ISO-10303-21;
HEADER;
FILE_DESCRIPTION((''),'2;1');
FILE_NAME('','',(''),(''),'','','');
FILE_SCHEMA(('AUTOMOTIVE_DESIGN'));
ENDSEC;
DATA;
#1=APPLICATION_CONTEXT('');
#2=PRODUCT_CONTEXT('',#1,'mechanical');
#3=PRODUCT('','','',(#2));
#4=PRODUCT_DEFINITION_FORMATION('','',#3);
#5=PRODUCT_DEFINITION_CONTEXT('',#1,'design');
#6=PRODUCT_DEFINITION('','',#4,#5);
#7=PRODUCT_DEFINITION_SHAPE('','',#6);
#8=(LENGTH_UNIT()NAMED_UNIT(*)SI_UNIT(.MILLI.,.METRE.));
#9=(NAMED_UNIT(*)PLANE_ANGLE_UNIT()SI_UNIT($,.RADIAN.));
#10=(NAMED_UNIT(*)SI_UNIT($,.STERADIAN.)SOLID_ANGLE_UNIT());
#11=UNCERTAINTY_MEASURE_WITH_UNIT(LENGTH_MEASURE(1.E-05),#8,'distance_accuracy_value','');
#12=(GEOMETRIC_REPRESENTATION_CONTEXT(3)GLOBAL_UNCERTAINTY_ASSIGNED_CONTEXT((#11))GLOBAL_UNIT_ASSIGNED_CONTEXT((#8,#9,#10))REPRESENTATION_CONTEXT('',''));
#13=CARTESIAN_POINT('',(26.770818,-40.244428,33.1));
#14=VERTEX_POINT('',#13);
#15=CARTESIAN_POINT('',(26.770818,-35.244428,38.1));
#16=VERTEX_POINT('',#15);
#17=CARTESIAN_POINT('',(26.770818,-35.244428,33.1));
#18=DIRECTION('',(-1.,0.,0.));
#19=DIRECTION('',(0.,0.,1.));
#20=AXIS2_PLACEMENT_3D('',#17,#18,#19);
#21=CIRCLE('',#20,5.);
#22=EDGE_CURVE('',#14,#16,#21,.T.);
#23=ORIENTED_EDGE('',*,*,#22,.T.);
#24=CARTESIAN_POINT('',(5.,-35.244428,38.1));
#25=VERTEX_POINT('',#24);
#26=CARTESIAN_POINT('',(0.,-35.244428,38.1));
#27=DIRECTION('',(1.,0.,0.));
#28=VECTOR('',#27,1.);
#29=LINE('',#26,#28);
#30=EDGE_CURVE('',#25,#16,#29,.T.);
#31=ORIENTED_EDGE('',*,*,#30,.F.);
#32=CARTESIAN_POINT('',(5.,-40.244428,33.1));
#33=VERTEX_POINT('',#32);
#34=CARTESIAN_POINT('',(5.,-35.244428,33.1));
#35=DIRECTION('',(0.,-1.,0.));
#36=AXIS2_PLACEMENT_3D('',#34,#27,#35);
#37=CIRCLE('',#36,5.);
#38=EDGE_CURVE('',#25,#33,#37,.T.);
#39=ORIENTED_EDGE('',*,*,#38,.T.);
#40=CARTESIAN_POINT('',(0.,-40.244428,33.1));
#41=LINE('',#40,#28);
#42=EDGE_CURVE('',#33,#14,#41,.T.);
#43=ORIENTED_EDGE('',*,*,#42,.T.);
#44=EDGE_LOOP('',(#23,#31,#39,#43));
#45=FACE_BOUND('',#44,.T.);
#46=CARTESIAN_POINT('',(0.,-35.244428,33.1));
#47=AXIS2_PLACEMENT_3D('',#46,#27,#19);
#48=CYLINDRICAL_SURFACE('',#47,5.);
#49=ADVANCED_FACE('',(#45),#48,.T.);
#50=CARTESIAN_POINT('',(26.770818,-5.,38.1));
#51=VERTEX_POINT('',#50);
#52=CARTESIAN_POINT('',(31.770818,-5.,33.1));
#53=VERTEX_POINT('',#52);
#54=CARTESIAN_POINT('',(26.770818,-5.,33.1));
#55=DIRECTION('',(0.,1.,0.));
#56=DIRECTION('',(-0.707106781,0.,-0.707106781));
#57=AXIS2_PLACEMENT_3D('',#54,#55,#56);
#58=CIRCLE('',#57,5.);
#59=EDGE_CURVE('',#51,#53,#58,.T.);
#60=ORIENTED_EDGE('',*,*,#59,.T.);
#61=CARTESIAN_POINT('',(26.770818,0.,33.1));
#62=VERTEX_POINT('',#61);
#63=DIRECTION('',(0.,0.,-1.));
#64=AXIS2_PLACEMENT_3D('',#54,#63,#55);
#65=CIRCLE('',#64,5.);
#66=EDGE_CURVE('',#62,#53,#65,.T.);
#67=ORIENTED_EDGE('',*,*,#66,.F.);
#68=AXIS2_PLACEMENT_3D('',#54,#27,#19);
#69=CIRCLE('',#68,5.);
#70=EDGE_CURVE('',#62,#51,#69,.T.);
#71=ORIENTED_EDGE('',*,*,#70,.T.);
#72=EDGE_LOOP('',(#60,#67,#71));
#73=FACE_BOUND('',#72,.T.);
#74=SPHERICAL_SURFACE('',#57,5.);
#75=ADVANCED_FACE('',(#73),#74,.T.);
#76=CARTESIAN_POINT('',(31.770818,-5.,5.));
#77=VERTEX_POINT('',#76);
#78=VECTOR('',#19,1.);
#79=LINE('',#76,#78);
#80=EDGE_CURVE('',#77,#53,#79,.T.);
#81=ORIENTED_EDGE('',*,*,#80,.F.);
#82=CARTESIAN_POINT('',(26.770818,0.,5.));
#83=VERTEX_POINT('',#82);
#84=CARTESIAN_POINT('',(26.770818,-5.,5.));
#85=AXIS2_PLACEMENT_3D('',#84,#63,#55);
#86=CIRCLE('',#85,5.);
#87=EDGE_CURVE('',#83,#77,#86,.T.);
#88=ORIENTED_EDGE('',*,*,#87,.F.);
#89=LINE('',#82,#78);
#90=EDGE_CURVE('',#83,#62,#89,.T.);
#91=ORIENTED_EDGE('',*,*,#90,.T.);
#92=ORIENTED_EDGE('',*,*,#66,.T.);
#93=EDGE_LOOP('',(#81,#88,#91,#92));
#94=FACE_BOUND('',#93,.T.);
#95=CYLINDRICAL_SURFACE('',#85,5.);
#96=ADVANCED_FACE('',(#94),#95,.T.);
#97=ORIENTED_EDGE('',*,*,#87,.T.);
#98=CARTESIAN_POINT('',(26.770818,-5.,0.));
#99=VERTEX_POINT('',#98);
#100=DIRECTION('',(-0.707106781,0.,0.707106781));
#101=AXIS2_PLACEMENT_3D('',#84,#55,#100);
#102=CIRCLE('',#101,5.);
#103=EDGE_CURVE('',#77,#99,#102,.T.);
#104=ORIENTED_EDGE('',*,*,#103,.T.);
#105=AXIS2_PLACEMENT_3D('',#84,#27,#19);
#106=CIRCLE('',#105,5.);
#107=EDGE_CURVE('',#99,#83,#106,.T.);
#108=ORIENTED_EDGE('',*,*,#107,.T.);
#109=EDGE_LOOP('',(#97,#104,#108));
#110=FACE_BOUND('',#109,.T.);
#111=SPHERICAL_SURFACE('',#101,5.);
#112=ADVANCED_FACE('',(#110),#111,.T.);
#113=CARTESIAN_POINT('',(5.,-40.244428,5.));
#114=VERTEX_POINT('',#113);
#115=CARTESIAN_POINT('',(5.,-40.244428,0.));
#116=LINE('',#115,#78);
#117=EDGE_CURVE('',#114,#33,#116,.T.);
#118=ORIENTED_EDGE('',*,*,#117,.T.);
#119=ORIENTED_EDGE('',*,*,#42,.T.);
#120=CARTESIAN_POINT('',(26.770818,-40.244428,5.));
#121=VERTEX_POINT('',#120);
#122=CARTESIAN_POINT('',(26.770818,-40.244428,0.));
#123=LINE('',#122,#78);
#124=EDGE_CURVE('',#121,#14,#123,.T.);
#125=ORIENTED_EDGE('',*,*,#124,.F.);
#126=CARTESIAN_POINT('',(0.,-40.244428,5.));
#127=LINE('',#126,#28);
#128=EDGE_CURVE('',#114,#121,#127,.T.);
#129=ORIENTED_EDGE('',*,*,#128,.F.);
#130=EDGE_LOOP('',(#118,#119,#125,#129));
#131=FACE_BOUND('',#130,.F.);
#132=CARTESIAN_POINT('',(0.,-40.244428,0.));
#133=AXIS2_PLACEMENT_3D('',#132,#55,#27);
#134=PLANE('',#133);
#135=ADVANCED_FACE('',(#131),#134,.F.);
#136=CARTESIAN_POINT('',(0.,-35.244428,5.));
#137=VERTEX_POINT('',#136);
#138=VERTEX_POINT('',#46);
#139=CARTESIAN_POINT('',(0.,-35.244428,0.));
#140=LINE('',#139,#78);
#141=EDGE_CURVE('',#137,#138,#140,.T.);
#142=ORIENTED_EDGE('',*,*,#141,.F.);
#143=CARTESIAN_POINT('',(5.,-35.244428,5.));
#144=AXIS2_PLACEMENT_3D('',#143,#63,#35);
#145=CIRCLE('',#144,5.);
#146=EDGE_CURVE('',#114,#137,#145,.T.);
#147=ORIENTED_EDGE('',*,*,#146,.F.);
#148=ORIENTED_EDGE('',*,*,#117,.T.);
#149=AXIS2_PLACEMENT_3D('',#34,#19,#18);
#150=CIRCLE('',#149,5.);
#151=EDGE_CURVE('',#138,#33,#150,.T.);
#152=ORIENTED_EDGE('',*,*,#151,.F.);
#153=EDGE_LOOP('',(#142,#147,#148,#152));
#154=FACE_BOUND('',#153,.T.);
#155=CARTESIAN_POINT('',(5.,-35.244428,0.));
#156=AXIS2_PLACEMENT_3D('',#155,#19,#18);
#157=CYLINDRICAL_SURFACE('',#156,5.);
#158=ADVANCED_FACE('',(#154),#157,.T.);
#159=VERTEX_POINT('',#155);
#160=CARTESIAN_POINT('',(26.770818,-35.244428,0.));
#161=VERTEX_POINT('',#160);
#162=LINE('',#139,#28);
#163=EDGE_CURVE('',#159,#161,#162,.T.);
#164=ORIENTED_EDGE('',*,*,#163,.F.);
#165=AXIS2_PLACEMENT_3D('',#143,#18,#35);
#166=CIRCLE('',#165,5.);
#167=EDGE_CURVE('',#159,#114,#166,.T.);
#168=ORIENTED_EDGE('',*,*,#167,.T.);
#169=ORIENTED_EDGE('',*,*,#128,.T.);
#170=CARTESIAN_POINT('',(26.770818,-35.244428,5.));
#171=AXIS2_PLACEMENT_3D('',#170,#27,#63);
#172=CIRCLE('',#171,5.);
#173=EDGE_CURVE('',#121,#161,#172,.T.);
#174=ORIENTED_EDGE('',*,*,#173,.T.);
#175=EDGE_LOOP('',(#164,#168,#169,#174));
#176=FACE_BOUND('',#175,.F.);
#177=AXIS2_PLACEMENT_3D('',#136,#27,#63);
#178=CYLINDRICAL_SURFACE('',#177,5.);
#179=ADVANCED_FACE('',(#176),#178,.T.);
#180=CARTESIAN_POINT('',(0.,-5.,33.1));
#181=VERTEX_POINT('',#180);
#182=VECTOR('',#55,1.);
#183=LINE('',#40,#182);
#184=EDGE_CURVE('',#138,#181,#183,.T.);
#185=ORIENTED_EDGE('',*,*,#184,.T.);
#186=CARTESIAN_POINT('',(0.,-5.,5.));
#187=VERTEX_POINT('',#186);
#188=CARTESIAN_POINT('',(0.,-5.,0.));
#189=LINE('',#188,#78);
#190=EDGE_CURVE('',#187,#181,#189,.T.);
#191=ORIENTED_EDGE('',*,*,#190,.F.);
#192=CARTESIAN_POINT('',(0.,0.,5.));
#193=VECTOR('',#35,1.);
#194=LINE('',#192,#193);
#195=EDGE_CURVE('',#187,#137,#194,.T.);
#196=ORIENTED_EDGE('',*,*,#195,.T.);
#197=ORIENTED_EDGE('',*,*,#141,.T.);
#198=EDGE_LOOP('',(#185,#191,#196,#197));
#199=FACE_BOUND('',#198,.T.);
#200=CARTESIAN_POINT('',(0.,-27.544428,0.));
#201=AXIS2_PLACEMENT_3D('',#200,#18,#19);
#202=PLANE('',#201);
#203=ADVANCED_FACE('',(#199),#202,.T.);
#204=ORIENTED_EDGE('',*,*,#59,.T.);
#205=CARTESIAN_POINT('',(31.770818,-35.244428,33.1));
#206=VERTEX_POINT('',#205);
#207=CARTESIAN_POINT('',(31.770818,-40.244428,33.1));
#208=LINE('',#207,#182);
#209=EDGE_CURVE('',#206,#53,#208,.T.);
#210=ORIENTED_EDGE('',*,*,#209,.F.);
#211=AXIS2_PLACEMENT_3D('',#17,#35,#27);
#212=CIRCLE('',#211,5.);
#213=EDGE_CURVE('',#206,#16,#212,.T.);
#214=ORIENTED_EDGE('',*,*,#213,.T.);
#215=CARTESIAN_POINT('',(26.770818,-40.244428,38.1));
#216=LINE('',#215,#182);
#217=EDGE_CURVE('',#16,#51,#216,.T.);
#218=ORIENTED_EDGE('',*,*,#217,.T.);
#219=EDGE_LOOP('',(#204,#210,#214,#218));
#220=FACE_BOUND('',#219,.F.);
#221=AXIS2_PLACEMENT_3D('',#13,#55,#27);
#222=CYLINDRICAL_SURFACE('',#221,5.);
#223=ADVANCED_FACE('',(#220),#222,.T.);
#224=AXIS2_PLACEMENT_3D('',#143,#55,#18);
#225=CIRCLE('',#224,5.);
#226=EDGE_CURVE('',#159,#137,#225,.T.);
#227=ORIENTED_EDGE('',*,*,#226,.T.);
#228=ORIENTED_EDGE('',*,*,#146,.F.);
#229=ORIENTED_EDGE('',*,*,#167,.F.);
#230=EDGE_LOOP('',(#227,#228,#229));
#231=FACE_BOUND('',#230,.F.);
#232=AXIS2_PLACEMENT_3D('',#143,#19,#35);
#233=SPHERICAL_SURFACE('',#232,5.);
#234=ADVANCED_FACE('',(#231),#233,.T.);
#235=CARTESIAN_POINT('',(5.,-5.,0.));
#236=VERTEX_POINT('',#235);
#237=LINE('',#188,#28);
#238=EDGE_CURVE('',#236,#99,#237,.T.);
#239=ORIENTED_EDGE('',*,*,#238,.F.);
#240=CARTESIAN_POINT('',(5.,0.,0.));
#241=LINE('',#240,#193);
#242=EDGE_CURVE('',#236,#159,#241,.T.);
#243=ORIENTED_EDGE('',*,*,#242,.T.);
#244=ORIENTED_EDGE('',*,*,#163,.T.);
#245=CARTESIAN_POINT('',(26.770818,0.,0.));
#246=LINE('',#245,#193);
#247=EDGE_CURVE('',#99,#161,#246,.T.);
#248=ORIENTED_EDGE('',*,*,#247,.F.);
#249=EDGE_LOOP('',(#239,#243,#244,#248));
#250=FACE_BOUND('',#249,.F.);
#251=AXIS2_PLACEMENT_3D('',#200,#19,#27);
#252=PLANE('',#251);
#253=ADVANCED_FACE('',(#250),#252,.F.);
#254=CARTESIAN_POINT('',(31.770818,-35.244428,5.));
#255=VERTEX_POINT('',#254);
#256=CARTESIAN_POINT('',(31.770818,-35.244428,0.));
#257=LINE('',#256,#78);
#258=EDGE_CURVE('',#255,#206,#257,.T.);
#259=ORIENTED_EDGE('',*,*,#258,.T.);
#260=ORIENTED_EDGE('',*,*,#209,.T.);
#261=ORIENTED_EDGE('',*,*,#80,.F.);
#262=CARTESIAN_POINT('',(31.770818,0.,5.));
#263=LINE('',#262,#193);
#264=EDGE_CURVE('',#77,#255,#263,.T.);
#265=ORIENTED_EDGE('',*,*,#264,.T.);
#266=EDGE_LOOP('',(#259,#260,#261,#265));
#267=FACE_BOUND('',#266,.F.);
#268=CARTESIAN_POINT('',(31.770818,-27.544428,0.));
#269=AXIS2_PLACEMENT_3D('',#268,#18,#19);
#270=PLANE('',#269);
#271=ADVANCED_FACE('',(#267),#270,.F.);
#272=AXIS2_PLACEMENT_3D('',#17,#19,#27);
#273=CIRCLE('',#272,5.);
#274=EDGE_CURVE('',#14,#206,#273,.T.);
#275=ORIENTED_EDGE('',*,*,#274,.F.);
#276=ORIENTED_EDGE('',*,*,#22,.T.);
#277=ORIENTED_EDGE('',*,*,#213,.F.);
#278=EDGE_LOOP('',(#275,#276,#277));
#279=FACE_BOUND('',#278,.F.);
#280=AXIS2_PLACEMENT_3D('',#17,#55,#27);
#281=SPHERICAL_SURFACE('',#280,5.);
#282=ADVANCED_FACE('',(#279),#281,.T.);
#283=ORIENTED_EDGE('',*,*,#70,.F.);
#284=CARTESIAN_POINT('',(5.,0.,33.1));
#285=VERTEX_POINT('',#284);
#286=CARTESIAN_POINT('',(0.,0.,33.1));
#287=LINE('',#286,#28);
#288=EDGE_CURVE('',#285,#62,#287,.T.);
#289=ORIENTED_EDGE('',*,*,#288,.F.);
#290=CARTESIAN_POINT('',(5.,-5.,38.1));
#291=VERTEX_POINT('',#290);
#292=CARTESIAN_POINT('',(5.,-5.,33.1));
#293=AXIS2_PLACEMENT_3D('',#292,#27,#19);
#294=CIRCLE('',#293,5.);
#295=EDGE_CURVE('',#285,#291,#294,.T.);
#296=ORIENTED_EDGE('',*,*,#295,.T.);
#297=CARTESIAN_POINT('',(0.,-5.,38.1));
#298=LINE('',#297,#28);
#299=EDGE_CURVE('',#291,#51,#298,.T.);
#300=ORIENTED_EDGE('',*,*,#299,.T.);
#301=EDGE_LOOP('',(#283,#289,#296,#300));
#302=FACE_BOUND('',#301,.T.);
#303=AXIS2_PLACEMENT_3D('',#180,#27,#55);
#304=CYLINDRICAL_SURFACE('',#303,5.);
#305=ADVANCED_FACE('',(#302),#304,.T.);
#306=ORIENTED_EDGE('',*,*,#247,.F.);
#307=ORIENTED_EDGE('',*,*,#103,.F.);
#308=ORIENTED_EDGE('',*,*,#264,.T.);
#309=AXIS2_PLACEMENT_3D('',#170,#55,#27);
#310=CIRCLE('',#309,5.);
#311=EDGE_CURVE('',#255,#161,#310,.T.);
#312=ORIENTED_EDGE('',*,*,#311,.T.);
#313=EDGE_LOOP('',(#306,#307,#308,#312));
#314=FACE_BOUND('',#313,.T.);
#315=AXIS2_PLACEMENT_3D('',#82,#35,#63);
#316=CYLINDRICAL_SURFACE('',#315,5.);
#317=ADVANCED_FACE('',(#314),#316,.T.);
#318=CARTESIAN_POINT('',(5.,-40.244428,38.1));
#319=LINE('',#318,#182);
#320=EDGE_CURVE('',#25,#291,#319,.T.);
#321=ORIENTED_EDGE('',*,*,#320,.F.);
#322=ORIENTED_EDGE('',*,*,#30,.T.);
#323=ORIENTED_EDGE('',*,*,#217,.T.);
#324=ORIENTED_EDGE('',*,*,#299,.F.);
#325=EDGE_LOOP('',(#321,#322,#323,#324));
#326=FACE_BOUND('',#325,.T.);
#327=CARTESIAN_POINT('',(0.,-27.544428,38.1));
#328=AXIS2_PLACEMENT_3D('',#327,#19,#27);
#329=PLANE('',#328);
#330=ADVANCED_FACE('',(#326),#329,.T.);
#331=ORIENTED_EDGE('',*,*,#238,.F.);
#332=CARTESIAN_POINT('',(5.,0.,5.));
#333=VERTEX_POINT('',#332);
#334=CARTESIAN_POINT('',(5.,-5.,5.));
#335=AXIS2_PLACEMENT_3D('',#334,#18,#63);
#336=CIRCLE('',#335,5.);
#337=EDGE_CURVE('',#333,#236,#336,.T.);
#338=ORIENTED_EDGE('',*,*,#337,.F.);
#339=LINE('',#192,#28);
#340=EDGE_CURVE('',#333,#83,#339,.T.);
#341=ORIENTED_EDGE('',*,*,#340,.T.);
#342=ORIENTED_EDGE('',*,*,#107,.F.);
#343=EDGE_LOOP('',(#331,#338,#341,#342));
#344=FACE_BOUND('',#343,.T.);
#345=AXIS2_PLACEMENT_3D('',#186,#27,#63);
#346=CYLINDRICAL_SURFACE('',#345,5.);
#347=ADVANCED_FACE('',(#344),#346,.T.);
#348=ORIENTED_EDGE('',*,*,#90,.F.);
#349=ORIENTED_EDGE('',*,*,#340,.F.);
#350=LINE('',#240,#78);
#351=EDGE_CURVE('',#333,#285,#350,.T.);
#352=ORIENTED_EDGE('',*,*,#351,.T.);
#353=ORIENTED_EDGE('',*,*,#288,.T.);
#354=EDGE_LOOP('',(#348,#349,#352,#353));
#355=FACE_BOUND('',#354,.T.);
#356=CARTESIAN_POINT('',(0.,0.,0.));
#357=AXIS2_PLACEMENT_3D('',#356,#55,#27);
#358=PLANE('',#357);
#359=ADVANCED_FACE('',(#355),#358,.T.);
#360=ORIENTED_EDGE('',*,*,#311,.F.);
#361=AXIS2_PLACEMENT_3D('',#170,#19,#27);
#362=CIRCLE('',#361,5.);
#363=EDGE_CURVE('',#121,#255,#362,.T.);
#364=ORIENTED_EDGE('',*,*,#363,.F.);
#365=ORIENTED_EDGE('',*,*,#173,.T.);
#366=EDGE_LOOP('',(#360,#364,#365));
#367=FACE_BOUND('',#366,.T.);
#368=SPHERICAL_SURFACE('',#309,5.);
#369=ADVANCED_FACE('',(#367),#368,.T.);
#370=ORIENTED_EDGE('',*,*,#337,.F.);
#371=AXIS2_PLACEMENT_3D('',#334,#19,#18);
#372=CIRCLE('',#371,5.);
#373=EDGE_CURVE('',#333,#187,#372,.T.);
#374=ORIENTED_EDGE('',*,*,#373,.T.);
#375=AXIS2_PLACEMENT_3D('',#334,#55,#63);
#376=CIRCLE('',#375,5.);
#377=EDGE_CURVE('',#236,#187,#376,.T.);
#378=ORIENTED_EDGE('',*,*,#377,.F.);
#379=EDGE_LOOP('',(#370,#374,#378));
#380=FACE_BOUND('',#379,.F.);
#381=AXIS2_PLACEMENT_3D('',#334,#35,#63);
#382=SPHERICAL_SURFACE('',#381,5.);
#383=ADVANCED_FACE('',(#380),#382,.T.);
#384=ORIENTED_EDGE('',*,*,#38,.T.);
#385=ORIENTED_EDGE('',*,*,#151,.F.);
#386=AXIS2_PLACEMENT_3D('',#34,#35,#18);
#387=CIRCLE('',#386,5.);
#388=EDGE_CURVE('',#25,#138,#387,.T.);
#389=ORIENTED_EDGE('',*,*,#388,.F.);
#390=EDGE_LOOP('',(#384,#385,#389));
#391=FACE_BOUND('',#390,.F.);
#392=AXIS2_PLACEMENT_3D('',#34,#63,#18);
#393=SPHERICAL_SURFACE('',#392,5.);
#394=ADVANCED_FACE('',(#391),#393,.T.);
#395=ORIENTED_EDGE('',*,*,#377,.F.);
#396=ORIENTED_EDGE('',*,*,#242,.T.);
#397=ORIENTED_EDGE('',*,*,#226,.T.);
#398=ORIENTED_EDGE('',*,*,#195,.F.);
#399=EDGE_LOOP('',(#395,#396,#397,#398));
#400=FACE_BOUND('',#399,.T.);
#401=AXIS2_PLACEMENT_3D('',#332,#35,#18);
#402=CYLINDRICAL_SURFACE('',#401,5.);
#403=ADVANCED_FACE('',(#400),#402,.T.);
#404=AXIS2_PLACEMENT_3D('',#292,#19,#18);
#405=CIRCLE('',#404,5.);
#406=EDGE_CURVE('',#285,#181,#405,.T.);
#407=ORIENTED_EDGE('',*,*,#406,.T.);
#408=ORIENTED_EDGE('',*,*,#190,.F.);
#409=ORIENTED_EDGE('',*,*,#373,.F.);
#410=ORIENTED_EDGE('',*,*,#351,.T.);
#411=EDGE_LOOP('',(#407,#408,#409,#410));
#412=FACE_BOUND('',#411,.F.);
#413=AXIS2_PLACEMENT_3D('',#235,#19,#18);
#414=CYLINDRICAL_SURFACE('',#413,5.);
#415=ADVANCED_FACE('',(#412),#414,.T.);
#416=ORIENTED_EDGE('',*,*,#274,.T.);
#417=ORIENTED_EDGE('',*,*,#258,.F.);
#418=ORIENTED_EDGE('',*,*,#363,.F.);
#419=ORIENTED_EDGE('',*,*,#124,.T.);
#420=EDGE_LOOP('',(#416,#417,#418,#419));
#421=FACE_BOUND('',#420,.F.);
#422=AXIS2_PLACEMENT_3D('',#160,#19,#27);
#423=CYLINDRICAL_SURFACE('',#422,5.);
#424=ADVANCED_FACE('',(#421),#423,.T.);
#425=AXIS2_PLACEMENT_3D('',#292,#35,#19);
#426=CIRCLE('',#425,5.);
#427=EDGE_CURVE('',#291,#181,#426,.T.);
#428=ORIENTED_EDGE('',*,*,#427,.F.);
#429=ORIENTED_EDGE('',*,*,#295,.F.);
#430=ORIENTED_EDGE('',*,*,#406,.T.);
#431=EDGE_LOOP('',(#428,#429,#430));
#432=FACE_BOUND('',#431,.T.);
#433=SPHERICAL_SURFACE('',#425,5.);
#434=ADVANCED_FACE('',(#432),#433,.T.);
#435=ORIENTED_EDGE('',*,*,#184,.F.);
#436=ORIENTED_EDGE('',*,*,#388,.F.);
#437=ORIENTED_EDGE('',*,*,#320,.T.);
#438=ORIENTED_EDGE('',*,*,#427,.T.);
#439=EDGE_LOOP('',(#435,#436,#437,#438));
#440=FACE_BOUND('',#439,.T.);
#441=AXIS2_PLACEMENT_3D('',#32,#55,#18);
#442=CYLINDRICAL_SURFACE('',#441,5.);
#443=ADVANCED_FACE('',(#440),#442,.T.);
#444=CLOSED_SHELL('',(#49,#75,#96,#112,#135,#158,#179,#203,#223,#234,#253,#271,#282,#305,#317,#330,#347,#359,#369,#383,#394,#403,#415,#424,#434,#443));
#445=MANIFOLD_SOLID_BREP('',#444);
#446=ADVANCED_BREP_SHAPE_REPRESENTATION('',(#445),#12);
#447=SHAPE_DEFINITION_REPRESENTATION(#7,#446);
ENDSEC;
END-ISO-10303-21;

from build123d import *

# Parameters (mm, degrees)
F0_W         = 31.7708179355
F0_H         = 27.5444276631
F1_DEPTH     = 38.1
F2_DEPTH     = 12.7
F3_R         = 5
F4_T1_DEPTH  = 28.1
F4_S5_W      = 5
F4_S5_H      = 5
F4_T6_DEPTH  = 5
F4_S11_W     = 5
F4_S11_H     = 5
F4_T12_DEPTH = 5


# Not quite as in the source:
# - a fillet or chamfer that OpenCascade refuses, or shapes differently, is made with other operations: its cross-section is extruded or revolved along the edge and cut away or added


with BuildPart() as f1:
    # F0 (on Top) → F1 (new body)
    with BuildSketch(Plane.XY):
        with Locations((15.8854089677, -13.7722138315)):
            Rectangle(F0_W, F0_H)
    extrude(amount=F1_DEPTH)

    # F2 (add): a face of the model
    f2_faces = [f1.faces().sort_by_distance(p)[0] for p in [
        (15.8854089677, -27.5444276631, 19.05),
    ]]
    extrude(f2_faces, amount=F2_DEPTH)

    # F3
    f3_edges = [f1.edges().sort_by_distance(p)[0] for p in [
        (0, -40.244428, 19.05),
        (0, -20.122214, 38.1),
        (31.770818, -20.122214, 0),
        (31.770818, -20.122214, 38.1),
        (31.770818, -40.244428, 19.05),
        (15.885409, 0, 38.1),
        (15.885409, -40.244428, 0),
        (0, -20.122214, 0),
        (15.885409, -40.244428, 38.1),
        (15.885409, 0, 0),
        (0, 0, 19.05),
    ]]
    fillet(f3_edges, radius=F3_R)

    # F4: fillet of radius 5 on 1 edges, made by hand

    # F4_s2 → F4_t1 (cut)
    with BuildSketch(Plane.XY.offset(5)):
        with BuildLine():
            ThreePointArc((26.7708179355, 0), (30.3063518414, -1.4644660941), (31.7708179355, -5))
            Line((31.7708179355, -5), (31.7708179355, 0))
            Line((31.7708179355, 0), (26.7708179355, 0))
        make_face()
    extrude(amount=F4_T1_DEPTH, mode=Mode.SUBTRACT)


with BuildPart() as f4_tool4:
    # F4_s5 → F4_t6 (new body)
    with BuildSketch(Plane.XZ.offset(5)):
        with Locations((29.2708179355, 2.5)):
            Rectangle(F4_S5_W, F4_S5_H)
    extrude(amount=-F4_T6_DEPTH)

    # F4_s7 → F4_t8 (revolve, cut)
    with BuildSketch(Plane(origin=(26.7708179355, -5, 5), x_dir=(-0.7071067812, 0, 0.7071067812), z_dir=(-0.7071067812, 0, -0.7071067812))):
        with BuildLine():
            ThreePointArc((0, -5), (5, 0), (0, 5))
            Line((0, 5), (0, -5))
        make_face()
    revolve(axis=Axis((26.7708179355, -5, 5), (0, 1, 0)), mode=Mode.SUBTRACT)


with BuildPart() as f1_1:
    add(f1.part)

    # F4_t3: cut F4_tool4
    add(f4_tool4.part, mode=Mode.SUBTRACT)


with BuildPart() as f4_tool10:
    # F4_s11 → F4_t12 (new body)
    with BuildSketch(Plane.XZ.offset(5)):
        with Locations((29.2708179355, 35.6)):
            Rectangle(F4_S11_W, F4_S11_H)
    extrude(amount=-F4_T12_DEPTH)

    # F4_s13 → F4_t14 (revolve, cut)
    with BuildSketch(Plane(origin=(26.7708179355, -5, 33.1), x_dir=(-0.7071067812, 0, -0.7071067812), z_dir=(0.7071067812, 0, -0.7071067812))):
        with BuildLine():
            ThreePointArc((0, -5), (5, 0), (0, 5))
            Line((0, 5), (0, -5))
        make_face()
    revolve(axis=Axis((26.7708179355, -5, 33.1), (0, 1, 0)), mode=Mode.SUBTRACT)


with BuildPart() as f1_2:
    add(f1_1.part)

    # F4_t9: cut F4_tool10
    add(f4_tool10.part, mode=Mode.SUBTRACT)


solid = f1_2.part
